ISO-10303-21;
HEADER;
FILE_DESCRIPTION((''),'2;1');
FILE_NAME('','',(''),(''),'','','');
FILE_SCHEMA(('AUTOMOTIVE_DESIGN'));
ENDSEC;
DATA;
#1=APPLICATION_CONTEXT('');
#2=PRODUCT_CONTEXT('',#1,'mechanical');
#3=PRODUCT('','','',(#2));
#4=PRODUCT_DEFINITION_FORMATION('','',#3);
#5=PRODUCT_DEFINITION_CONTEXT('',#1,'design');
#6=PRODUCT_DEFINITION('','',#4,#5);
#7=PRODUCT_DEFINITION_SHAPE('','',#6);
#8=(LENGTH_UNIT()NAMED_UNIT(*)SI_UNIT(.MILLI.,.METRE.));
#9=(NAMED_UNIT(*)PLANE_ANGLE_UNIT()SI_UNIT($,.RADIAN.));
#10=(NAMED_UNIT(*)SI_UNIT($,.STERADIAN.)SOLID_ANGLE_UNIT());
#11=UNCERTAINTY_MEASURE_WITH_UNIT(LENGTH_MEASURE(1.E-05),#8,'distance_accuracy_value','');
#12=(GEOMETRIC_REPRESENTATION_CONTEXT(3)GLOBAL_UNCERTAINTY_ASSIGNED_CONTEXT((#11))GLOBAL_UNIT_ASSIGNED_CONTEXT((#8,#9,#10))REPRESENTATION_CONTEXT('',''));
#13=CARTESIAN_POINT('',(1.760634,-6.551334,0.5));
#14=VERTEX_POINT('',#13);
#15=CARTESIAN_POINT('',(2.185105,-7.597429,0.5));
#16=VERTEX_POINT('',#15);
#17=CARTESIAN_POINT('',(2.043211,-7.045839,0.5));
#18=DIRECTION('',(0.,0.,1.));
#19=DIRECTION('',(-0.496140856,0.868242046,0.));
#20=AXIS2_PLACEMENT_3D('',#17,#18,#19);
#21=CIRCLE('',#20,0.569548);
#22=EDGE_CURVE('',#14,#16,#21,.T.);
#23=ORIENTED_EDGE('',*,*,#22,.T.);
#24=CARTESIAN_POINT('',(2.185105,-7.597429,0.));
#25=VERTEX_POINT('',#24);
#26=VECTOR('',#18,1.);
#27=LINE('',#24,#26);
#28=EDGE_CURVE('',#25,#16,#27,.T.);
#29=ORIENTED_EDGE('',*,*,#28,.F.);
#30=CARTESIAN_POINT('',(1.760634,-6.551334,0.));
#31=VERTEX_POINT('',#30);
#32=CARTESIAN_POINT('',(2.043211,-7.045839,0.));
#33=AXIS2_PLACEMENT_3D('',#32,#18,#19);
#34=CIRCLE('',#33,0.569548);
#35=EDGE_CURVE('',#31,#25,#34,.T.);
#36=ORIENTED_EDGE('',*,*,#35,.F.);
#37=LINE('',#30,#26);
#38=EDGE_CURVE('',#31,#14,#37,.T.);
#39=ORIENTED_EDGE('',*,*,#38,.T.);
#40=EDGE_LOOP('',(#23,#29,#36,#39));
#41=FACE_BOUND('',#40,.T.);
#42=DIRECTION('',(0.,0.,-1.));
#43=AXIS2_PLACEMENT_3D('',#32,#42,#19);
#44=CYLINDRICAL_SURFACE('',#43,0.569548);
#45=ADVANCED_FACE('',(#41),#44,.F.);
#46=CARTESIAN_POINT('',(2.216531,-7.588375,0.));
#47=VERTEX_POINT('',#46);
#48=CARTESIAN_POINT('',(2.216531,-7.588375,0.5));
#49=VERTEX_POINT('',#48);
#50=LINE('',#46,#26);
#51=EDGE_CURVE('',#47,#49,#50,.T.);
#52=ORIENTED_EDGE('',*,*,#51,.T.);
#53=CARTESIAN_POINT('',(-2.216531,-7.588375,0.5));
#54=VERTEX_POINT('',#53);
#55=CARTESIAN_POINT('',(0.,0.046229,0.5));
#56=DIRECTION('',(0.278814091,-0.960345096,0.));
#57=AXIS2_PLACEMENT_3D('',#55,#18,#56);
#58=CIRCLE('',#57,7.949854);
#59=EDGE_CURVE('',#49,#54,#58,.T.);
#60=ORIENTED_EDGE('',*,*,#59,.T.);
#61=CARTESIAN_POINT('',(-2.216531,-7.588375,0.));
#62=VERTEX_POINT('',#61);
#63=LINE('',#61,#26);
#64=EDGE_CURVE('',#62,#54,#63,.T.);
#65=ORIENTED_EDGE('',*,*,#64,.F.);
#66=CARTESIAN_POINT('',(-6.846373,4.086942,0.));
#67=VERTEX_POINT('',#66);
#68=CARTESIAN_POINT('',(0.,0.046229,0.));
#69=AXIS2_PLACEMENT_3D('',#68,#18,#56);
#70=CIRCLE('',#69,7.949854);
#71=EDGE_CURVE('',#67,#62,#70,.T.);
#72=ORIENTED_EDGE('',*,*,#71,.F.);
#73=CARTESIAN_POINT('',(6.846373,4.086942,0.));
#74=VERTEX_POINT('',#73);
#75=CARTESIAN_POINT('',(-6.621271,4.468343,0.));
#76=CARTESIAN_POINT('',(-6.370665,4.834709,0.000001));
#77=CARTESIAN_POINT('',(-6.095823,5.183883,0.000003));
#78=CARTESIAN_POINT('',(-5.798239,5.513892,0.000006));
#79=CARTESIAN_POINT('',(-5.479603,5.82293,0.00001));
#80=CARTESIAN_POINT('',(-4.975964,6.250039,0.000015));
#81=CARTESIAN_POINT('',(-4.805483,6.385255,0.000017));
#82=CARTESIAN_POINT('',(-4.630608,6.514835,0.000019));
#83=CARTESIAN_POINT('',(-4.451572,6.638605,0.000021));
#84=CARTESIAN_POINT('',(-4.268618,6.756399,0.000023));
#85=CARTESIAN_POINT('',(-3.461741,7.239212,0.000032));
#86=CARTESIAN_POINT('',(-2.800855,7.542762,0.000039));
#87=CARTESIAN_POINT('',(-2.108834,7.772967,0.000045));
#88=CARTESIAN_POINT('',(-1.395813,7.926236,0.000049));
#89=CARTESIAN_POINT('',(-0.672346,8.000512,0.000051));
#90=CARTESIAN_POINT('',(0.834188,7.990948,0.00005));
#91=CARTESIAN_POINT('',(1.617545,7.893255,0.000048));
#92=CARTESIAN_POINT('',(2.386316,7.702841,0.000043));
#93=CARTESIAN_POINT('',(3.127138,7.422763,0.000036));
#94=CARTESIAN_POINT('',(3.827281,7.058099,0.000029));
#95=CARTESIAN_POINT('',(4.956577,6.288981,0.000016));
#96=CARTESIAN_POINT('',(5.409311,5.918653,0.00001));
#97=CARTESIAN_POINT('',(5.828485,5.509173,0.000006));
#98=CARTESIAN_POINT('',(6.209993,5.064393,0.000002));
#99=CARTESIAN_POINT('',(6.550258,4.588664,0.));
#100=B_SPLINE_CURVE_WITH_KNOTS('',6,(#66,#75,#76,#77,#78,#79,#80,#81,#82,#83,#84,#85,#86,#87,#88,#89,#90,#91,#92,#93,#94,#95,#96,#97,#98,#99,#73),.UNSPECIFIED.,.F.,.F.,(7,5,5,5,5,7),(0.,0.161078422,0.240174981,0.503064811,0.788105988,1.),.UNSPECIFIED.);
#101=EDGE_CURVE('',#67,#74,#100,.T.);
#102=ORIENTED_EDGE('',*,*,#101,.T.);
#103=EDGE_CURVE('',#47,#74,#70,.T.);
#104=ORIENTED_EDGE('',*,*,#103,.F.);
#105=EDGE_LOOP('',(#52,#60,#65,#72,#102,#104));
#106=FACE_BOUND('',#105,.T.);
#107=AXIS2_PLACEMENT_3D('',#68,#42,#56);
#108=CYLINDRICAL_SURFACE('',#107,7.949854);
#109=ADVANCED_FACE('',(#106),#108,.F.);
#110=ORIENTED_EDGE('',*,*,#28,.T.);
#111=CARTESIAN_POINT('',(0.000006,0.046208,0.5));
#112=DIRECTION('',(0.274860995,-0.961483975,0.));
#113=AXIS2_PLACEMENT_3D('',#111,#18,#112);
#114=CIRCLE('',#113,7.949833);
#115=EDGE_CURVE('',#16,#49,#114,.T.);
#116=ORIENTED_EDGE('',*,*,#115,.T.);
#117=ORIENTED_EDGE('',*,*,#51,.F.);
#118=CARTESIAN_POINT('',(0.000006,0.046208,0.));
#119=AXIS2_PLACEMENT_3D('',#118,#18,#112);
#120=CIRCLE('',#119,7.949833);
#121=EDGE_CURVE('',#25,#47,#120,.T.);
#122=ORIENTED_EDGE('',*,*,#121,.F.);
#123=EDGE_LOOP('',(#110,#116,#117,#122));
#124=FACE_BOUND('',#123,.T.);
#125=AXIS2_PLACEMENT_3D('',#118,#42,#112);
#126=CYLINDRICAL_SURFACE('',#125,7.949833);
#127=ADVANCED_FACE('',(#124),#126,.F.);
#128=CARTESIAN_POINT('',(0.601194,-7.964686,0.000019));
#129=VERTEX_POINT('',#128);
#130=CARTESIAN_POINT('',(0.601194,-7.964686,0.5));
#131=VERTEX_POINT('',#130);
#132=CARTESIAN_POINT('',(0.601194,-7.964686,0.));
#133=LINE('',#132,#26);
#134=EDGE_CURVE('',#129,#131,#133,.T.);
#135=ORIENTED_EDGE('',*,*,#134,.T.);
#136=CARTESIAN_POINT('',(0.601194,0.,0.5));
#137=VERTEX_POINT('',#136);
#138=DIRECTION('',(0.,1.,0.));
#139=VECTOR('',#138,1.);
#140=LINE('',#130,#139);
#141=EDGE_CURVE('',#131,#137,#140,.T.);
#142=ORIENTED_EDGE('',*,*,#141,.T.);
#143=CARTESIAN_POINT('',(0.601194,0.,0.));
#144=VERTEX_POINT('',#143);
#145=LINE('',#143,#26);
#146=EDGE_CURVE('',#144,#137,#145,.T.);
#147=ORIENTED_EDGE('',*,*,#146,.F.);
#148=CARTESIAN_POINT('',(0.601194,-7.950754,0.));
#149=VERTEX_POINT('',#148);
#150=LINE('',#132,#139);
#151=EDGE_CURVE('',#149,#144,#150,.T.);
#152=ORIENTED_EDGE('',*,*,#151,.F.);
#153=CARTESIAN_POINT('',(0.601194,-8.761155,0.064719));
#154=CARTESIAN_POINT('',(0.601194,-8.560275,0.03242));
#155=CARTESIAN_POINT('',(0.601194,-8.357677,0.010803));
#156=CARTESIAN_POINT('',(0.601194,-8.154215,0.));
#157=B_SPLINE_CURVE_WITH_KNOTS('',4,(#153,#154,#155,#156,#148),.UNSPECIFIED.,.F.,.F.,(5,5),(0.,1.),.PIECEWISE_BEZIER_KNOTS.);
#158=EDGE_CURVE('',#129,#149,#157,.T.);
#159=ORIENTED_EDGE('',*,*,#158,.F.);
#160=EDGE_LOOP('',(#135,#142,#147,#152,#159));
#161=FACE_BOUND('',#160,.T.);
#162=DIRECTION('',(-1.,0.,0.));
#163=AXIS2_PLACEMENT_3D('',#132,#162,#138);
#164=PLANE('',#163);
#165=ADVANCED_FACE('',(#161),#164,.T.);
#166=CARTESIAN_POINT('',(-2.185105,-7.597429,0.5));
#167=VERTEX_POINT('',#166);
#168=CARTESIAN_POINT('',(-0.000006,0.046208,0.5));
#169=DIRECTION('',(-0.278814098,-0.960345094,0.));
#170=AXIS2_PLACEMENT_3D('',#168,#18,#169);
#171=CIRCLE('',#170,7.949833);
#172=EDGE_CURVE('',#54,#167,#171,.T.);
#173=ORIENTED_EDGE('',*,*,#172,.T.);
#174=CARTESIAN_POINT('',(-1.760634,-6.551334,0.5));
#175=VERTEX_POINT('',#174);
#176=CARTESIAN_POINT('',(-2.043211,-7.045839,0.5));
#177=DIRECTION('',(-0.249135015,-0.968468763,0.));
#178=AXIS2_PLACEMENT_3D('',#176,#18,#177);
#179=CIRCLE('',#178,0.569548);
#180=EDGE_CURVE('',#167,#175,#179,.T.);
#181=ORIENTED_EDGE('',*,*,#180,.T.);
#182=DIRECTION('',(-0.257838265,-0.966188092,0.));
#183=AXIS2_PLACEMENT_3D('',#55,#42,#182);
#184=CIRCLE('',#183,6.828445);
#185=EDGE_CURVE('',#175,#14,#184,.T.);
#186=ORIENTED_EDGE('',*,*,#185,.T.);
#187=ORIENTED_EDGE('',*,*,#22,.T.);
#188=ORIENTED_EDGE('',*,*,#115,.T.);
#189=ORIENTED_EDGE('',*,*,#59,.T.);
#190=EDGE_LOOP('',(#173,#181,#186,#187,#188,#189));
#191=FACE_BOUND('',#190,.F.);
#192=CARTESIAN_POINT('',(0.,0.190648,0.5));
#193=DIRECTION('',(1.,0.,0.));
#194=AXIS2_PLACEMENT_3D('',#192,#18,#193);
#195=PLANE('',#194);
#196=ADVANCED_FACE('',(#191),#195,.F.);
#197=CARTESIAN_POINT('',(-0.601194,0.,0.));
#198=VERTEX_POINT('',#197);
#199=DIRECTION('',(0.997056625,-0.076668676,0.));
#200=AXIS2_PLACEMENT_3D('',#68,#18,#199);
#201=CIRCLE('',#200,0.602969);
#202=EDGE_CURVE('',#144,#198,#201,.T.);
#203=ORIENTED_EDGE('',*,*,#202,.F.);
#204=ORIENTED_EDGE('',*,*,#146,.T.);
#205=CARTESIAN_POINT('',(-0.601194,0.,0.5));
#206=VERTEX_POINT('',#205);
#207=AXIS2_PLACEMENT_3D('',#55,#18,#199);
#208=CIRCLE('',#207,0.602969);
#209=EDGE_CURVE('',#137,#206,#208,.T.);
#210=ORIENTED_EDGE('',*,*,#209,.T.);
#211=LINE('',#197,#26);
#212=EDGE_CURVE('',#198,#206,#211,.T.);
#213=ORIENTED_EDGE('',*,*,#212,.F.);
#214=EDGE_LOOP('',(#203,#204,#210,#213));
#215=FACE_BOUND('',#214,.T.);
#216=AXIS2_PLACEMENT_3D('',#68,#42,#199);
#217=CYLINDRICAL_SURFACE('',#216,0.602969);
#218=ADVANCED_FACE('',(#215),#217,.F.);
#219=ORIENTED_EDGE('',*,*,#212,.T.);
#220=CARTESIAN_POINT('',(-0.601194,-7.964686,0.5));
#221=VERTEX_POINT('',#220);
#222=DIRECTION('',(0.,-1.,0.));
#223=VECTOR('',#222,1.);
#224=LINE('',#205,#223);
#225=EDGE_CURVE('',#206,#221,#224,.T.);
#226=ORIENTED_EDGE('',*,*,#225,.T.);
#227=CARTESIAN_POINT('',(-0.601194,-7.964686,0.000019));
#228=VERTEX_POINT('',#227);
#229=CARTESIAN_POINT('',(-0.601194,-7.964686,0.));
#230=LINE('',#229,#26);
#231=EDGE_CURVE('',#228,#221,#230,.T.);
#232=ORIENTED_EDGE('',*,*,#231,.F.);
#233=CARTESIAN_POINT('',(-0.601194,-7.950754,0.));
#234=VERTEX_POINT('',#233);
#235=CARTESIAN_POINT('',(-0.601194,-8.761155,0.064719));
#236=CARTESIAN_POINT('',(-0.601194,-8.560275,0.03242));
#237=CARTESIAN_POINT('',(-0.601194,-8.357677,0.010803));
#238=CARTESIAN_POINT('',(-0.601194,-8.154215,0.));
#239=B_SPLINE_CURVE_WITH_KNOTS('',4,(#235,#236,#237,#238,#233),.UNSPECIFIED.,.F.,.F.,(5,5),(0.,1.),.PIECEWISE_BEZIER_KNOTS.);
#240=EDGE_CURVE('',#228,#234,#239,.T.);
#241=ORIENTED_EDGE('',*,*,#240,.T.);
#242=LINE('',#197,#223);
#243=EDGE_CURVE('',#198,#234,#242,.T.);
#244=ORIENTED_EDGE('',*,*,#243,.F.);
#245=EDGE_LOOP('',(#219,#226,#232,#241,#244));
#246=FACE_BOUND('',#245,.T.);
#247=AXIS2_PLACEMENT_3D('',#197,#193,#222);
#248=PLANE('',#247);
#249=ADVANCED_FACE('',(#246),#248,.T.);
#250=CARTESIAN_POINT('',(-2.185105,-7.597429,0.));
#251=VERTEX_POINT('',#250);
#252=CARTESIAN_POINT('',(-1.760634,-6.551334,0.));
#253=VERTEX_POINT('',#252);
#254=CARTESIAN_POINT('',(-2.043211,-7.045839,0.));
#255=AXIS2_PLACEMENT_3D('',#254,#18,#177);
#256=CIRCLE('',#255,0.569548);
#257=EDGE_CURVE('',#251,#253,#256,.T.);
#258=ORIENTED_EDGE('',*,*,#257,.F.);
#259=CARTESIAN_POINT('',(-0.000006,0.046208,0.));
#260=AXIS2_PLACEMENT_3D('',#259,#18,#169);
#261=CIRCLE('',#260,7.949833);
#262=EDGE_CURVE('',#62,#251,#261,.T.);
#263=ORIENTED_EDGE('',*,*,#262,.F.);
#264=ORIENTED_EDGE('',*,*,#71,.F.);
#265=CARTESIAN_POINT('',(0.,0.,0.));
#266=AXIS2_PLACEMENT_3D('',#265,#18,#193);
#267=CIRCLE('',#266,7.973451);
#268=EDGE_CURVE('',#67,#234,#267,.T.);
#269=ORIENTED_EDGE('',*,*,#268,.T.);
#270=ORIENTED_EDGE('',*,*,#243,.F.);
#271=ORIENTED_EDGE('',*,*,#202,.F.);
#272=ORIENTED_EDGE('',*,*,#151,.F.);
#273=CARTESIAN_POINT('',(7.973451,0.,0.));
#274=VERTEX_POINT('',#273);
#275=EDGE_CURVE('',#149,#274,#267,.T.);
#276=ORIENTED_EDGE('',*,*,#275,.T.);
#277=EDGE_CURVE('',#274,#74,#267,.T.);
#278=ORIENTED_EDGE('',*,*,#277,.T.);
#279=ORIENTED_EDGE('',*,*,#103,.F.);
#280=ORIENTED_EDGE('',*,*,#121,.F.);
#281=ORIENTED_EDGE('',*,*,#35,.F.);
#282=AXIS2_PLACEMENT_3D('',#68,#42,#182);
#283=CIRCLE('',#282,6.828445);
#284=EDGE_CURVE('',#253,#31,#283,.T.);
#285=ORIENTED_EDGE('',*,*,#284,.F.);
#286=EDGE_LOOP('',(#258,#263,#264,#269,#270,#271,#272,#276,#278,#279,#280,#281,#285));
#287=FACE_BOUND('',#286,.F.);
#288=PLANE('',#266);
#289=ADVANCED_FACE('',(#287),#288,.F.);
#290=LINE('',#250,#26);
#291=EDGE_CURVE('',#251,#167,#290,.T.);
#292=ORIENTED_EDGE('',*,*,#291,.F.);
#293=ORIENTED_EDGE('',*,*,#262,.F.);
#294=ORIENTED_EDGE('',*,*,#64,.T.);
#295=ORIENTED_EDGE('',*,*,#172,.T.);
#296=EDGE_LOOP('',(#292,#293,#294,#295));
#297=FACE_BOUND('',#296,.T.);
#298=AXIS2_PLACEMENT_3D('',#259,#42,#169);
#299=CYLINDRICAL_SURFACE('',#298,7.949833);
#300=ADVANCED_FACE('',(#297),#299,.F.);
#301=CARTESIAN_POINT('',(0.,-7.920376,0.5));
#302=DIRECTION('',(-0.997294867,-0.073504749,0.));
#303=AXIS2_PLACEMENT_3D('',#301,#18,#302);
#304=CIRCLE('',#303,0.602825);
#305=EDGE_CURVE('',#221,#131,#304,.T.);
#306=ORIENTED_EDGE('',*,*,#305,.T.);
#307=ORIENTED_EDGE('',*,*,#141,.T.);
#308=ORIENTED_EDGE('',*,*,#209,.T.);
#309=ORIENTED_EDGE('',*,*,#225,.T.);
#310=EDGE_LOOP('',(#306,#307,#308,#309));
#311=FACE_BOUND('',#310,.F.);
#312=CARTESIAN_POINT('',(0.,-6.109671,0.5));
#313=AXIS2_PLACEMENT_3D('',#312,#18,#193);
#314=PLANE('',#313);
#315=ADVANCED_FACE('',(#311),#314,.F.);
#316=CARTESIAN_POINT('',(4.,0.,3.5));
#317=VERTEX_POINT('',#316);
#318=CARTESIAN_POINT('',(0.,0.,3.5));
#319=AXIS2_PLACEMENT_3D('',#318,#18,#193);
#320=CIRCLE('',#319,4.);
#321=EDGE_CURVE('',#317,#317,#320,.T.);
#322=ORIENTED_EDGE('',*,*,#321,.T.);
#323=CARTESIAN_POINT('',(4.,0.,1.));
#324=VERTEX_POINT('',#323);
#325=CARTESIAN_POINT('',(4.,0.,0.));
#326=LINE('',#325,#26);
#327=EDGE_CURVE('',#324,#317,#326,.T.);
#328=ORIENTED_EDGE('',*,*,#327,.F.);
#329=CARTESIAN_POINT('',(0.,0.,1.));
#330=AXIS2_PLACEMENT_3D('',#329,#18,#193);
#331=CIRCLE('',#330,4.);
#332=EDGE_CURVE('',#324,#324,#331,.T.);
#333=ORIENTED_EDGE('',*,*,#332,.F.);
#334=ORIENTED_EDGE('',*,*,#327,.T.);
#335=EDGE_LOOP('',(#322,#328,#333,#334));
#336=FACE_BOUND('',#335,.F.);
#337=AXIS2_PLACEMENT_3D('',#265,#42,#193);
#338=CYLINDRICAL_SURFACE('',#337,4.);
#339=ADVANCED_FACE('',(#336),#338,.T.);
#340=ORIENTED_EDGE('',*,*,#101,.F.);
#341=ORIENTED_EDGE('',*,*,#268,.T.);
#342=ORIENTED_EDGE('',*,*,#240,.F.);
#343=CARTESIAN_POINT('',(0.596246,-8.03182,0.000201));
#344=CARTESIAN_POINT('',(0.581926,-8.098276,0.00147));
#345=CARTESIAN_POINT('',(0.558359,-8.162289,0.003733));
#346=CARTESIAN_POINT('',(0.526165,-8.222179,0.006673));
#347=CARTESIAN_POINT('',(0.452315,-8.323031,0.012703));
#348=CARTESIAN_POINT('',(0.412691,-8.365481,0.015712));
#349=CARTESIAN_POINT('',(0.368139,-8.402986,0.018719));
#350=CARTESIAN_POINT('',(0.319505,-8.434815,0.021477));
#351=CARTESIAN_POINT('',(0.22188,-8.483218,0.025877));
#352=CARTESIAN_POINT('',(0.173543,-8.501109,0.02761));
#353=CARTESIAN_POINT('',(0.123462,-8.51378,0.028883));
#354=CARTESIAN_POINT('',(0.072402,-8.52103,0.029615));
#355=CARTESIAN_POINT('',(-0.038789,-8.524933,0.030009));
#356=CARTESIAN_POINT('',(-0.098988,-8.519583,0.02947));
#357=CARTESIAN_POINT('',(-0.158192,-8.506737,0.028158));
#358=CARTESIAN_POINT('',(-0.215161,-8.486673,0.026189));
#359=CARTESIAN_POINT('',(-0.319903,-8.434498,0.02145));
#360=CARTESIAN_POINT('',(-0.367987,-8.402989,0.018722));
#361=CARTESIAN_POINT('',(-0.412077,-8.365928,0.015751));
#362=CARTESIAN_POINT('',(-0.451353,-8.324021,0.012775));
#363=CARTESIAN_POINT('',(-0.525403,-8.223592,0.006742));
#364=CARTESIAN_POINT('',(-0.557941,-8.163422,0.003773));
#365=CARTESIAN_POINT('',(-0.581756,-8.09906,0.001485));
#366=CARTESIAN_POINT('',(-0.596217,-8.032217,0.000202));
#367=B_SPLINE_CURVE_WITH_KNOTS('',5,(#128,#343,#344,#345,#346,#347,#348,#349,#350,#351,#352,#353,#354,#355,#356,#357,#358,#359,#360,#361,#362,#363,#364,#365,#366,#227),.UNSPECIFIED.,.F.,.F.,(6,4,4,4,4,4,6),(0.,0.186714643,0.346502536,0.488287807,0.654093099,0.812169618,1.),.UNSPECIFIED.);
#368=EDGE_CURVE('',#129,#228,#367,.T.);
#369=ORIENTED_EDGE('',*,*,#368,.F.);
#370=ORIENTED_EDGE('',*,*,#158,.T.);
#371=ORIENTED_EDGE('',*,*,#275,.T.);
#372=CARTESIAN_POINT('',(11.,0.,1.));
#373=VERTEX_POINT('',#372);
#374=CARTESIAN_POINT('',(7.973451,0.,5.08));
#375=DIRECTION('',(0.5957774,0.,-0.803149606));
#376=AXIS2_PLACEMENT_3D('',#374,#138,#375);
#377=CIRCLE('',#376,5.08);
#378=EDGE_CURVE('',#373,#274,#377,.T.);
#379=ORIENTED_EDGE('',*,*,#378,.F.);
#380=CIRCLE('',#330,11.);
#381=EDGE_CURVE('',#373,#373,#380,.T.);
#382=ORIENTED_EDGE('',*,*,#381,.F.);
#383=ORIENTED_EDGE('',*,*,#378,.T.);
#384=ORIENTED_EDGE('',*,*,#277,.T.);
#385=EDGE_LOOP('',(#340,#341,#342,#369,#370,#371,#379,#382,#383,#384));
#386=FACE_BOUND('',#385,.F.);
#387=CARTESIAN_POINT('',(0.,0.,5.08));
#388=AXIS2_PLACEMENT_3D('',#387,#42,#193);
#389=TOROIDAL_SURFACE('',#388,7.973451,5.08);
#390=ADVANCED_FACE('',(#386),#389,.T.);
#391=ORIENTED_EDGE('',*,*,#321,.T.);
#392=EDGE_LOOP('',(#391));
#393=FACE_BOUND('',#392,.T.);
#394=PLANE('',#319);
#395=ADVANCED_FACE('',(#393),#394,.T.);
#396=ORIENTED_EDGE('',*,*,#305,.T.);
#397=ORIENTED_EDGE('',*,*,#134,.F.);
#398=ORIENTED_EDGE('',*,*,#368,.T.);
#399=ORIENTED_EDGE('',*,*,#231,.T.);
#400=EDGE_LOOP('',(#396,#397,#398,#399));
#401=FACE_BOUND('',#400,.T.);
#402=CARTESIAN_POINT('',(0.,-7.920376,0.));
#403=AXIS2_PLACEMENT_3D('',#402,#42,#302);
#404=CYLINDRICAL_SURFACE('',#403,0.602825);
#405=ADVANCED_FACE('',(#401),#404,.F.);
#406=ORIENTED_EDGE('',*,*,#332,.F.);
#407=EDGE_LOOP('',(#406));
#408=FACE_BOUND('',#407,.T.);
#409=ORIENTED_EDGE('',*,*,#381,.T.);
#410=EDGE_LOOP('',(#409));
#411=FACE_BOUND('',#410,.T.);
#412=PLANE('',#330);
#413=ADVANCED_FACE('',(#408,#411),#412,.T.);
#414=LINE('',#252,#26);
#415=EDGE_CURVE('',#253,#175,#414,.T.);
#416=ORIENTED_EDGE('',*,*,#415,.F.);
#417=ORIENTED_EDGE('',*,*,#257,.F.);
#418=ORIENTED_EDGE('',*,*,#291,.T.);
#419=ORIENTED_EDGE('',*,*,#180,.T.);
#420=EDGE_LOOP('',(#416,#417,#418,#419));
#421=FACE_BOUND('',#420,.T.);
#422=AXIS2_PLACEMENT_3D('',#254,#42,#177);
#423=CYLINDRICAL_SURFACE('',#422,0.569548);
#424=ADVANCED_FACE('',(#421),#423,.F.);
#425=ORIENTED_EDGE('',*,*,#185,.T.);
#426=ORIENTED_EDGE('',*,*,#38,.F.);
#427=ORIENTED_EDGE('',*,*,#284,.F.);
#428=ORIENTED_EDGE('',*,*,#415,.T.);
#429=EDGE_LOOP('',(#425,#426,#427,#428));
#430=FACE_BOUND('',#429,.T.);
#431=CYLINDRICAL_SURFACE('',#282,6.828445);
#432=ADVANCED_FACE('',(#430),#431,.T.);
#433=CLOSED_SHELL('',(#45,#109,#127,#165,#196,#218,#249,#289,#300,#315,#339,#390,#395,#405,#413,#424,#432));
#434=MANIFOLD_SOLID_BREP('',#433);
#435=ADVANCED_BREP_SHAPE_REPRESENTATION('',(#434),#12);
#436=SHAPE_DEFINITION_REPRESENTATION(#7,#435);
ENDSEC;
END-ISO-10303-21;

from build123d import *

# Parameters (mm, degrees)
F0_R     = 4
F1_DEPTH = 3.5
F0_R_2   = 11
F2_DEPTH = 1
F4_DEPTH = 0.5


# Not quite as in the source:
# - a fillet or chamfer that OpenCascade refuses, or shapes differently, is made with other operations: its cross-section is extruded or revolved along the edge and cut away or added


with BuildPart() as f1:
    # F0 (on Top) → F1 (new body)
    with BuildSketch(Plane.XY):
        Circle(F0_R)
    extrude(amount=F1_DEPTH)

    # F0 (on Top) → F2 (join)
    with BuildSketch(Plane.XY):
        Circle(F0_R_2)
        Circle(F0_R, mode=Mode.SUBTRACT)
    extrude(amount=F2_DEPTH)

    # F3 (on face) → F4 (cut)
    with BuildSketch(Plane.XY):
        with BuildLine():
            Line((-0.6011938094, -3.9545626817), (-0.6011938094, -7.9646864906))
            ThreePointArc((-0.6011938094, -7.9646864906), (0, -8.523200555), (0.6011938094, -7.9646864906))
            Line((0.6011938094, -7.9646864906), (0.6011938094, -3.9545626817))
            ThreePointArc((0.6011938094, -3.9545626817), (0, -4), (-0.6011938094, -3.9545626817))
        make_face()
        with BuildLine():
            Line((-0.6011938094, 0), (-0.6011938094, -3.9545626817))
            ThreePointArc((-0.6011938094, -3.9545626817), (0, -4), (0.6011938094, -3.9545626817))
            Line((0.6011938094, -3.9545626817), (0.6011938094, 0))
            ThreePointArc((0.6011938094, 0), (0, 0.6491973737), (-0.6011938094, 0))
        make_face()
        with BuildLine():
            ThreePointArc((-1.7606344773, -6.5513337031), (0, 6.8746740692), (1.7606344773, -6.5513337031))
            ThreePointArc((1.7606344773, -6.5513337031), (1.5154543616, -7.2599851451), (2.1851049368, -7.5974288625))
            ThreePointArc((2.1851049368, -7.5974288625), (2.2008228493, -7.5929180655), (2.21653145, -7.5883749472))
            ThreePointArc((2.21653145, -7.5883749472), (0, 7.9960832706), (-2.21653145, -7.5883749472))
            ThreePointArc((-2.21653145, -7.5883749472), (-2.2008228493, -7.5929180655), (-2.1851049368, -7.5974288625))
            ThreePointArc((-2.1851049368, -7.5974288625), (-1.5154543616, -7.2599851451), (-1.7606344773, -6.5513337031))
        make_face()
    extrude(amount=F4_DEPTH, mode=Mode.SUBTRACT)

    # F5: fillet of radius 5.08 on 1 edges, made by hand

    # F5_s1 → F5_t2 (revolve, cut)
    with BuildSketch(Plane.XZ):
        with BuildLine():
            ThreePointArc((11, 1), (9.567188555, 0.2564743185), (7.9734508099, 0))
            Line((7.9734508099, 0), (11, 0))
            Line((11, 0), (11, 1))
        make_face()
    revolve(axis=Axis((0, 0, 0), (0, 0, 1)), mode=Mode.SUBTRACT)


solid = f1.part
